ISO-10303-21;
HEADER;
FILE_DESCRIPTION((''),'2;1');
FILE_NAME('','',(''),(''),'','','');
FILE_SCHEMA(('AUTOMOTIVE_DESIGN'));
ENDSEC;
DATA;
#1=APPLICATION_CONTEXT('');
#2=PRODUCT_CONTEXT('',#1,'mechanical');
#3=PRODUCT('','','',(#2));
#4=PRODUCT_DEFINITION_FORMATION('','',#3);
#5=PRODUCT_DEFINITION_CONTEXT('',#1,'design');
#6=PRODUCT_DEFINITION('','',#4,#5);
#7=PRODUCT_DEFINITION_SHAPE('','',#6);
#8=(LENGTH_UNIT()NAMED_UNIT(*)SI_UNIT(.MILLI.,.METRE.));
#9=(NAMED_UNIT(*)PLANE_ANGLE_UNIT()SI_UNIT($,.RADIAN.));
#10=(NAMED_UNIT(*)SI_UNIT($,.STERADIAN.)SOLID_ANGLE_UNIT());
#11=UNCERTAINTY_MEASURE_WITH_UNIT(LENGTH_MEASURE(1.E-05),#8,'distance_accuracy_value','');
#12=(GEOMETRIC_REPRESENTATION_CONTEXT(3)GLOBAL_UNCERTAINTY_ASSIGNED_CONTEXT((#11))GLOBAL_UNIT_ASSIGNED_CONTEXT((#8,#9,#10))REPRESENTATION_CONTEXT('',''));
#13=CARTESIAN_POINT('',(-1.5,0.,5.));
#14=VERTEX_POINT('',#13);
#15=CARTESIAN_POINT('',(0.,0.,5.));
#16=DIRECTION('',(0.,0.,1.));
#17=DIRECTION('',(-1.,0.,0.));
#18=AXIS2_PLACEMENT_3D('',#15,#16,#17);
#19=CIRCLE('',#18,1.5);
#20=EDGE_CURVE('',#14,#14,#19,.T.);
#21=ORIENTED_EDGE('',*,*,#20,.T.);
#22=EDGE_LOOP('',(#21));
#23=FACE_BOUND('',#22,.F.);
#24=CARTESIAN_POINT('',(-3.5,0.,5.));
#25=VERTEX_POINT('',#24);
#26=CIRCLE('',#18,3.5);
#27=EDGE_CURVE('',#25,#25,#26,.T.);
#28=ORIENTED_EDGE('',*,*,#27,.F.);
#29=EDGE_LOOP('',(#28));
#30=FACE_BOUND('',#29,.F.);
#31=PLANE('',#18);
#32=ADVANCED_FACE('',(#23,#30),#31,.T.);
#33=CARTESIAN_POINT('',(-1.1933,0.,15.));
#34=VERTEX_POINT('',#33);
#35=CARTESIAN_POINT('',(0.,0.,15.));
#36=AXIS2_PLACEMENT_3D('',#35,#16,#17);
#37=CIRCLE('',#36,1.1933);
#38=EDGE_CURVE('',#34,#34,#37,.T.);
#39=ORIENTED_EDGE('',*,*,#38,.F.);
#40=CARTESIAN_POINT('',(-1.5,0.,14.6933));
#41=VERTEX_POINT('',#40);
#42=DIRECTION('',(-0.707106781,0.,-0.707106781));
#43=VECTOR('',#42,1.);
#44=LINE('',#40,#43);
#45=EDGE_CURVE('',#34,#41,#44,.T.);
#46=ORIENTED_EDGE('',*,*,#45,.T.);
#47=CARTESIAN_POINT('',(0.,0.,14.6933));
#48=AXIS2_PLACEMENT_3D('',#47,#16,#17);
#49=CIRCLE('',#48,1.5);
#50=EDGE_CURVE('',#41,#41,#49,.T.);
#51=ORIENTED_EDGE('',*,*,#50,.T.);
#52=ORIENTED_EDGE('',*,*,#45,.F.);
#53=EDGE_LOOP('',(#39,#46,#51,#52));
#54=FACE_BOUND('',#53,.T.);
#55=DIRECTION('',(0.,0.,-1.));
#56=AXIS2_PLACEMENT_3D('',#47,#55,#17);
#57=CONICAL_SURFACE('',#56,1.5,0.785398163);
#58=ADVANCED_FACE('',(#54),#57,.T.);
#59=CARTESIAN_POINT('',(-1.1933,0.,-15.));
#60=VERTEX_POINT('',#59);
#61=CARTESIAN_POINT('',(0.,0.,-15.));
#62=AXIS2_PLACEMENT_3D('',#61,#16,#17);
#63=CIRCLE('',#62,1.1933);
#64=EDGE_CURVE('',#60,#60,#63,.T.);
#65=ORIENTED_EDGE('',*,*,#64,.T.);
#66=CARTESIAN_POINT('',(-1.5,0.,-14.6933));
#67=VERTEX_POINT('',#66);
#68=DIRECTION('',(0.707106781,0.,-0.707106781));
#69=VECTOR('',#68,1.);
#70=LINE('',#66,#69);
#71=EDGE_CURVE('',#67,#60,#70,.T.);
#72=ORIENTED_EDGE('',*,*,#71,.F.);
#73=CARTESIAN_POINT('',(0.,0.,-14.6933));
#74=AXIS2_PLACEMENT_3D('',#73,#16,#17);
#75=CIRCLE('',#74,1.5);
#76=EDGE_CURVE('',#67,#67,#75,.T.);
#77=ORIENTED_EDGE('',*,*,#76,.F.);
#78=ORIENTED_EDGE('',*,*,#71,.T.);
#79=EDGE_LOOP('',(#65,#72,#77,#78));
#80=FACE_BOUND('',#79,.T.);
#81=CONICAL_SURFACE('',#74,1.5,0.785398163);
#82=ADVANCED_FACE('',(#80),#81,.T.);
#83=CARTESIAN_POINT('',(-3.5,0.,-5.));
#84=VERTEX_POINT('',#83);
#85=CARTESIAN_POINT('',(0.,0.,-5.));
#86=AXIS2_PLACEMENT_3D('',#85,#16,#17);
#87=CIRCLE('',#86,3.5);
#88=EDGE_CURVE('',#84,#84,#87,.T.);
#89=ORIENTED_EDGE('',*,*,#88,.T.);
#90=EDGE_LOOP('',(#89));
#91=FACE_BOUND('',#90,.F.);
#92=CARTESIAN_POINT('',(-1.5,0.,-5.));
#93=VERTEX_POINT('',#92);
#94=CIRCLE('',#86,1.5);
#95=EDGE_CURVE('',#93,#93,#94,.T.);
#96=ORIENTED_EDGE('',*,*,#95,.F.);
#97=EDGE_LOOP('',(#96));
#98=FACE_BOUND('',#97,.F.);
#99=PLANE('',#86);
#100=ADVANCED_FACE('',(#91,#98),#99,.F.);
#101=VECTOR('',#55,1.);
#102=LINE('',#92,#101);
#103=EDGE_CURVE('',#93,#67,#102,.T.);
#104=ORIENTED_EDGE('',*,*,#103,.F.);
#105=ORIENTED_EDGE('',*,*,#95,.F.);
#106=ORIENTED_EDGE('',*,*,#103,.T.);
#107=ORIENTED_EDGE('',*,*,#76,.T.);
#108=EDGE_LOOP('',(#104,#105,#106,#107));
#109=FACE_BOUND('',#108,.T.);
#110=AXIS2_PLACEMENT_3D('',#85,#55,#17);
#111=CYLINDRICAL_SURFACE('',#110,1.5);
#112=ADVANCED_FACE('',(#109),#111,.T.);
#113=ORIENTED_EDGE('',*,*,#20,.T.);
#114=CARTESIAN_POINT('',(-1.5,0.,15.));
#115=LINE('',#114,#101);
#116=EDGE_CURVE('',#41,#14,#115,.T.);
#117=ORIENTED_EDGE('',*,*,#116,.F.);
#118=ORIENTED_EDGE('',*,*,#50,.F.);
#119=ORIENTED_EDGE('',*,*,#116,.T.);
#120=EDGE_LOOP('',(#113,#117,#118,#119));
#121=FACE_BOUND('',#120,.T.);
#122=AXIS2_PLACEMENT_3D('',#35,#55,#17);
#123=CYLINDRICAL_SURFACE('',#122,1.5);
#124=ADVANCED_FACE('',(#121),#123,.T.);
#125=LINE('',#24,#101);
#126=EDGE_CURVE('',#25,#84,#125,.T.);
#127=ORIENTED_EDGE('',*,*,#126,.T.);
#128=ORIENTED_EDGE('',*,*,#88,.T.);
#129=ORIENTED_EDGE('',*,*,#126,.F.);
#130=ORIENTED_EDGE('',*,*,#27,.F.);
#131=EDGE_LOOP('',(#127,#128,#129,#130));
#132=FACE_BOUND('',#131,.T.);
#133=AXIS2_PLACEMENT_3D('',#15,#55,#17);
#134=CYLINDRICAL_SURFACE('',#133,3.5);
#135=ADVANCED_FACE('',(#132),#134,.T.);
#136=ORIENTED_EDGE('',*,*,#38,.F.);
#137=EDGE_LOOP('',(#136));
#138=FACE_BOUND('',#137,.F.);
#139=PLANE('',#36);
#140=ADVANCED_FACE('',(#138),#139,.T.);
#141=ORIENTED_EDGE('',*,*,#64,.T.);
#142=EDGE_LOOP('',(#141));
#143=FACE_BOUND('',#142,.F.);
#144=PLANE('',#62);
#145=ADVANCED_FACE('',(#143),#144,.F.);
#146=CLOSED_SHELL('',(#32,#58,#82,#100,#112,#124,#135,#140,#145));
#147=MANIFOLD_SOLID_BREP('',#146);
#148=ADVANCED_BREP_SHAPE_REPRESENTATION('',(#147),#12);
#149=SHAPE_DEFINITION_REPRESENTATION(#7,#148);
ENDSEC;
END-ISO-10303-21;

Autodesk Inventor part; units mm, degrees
ref_plane "YZ Plane" through (0, 0, 0) normal (1, 0, 0) x (0, 1, 0)
ref_plane "XZ Plane" through (0, 0, 0) normal (0, 1, 0) x (-1, 0, 0)
ref_plane "XY Plane" through (0, 0, 0) normal (0, 0, 1) x (1, 0, 0)
sketch "Boceto1" plane through (0, 0, 0) normal (0, 1, 0) x (-1, 0, 0)
  line L0 (0, 15) -> (1.5, 15)
  line L1 (1.5, 15) -> (1.5, 5)
  line L2 (1.5, 5) -> (3.5, 5)
  line L3 (3.5, 5) -> (3.5, -5)
  line L4 (3.5, -5) -> (1.5, -5)
  line L5 (1.5, -5) -> (1.5, -15)
  line L6 (1.5, -15) -> (0, -15)
  line L7 (0, -15) -> (0, 15)
  point P0 (0, 0)
  point P1 (0, 0)
  dimension "d0" = 7
  dimension "d1" = 3
  dimension "Dedos" = 10
  dimension "d3" = 30
revolve "Revolución1" add sketch "Boceto1" angle 360 about axis through (0, 0, -15) along (0, 0, 1)
thread "Rosca2" size "M3x0.5" class "6g" standard "ANSI Metric M Profile" length 4
thread "Rosca3" size "M3x0.5" class "6g" standard "ANSI Metric M Profile" length 4 offset 6
chamfer "Chaflán1" distance 0.3067 angle 45 2 edges at (1.5, 0, 15) (1.5, 0, -15)
properties part number "Clavija" material "Aluminio 6061"
